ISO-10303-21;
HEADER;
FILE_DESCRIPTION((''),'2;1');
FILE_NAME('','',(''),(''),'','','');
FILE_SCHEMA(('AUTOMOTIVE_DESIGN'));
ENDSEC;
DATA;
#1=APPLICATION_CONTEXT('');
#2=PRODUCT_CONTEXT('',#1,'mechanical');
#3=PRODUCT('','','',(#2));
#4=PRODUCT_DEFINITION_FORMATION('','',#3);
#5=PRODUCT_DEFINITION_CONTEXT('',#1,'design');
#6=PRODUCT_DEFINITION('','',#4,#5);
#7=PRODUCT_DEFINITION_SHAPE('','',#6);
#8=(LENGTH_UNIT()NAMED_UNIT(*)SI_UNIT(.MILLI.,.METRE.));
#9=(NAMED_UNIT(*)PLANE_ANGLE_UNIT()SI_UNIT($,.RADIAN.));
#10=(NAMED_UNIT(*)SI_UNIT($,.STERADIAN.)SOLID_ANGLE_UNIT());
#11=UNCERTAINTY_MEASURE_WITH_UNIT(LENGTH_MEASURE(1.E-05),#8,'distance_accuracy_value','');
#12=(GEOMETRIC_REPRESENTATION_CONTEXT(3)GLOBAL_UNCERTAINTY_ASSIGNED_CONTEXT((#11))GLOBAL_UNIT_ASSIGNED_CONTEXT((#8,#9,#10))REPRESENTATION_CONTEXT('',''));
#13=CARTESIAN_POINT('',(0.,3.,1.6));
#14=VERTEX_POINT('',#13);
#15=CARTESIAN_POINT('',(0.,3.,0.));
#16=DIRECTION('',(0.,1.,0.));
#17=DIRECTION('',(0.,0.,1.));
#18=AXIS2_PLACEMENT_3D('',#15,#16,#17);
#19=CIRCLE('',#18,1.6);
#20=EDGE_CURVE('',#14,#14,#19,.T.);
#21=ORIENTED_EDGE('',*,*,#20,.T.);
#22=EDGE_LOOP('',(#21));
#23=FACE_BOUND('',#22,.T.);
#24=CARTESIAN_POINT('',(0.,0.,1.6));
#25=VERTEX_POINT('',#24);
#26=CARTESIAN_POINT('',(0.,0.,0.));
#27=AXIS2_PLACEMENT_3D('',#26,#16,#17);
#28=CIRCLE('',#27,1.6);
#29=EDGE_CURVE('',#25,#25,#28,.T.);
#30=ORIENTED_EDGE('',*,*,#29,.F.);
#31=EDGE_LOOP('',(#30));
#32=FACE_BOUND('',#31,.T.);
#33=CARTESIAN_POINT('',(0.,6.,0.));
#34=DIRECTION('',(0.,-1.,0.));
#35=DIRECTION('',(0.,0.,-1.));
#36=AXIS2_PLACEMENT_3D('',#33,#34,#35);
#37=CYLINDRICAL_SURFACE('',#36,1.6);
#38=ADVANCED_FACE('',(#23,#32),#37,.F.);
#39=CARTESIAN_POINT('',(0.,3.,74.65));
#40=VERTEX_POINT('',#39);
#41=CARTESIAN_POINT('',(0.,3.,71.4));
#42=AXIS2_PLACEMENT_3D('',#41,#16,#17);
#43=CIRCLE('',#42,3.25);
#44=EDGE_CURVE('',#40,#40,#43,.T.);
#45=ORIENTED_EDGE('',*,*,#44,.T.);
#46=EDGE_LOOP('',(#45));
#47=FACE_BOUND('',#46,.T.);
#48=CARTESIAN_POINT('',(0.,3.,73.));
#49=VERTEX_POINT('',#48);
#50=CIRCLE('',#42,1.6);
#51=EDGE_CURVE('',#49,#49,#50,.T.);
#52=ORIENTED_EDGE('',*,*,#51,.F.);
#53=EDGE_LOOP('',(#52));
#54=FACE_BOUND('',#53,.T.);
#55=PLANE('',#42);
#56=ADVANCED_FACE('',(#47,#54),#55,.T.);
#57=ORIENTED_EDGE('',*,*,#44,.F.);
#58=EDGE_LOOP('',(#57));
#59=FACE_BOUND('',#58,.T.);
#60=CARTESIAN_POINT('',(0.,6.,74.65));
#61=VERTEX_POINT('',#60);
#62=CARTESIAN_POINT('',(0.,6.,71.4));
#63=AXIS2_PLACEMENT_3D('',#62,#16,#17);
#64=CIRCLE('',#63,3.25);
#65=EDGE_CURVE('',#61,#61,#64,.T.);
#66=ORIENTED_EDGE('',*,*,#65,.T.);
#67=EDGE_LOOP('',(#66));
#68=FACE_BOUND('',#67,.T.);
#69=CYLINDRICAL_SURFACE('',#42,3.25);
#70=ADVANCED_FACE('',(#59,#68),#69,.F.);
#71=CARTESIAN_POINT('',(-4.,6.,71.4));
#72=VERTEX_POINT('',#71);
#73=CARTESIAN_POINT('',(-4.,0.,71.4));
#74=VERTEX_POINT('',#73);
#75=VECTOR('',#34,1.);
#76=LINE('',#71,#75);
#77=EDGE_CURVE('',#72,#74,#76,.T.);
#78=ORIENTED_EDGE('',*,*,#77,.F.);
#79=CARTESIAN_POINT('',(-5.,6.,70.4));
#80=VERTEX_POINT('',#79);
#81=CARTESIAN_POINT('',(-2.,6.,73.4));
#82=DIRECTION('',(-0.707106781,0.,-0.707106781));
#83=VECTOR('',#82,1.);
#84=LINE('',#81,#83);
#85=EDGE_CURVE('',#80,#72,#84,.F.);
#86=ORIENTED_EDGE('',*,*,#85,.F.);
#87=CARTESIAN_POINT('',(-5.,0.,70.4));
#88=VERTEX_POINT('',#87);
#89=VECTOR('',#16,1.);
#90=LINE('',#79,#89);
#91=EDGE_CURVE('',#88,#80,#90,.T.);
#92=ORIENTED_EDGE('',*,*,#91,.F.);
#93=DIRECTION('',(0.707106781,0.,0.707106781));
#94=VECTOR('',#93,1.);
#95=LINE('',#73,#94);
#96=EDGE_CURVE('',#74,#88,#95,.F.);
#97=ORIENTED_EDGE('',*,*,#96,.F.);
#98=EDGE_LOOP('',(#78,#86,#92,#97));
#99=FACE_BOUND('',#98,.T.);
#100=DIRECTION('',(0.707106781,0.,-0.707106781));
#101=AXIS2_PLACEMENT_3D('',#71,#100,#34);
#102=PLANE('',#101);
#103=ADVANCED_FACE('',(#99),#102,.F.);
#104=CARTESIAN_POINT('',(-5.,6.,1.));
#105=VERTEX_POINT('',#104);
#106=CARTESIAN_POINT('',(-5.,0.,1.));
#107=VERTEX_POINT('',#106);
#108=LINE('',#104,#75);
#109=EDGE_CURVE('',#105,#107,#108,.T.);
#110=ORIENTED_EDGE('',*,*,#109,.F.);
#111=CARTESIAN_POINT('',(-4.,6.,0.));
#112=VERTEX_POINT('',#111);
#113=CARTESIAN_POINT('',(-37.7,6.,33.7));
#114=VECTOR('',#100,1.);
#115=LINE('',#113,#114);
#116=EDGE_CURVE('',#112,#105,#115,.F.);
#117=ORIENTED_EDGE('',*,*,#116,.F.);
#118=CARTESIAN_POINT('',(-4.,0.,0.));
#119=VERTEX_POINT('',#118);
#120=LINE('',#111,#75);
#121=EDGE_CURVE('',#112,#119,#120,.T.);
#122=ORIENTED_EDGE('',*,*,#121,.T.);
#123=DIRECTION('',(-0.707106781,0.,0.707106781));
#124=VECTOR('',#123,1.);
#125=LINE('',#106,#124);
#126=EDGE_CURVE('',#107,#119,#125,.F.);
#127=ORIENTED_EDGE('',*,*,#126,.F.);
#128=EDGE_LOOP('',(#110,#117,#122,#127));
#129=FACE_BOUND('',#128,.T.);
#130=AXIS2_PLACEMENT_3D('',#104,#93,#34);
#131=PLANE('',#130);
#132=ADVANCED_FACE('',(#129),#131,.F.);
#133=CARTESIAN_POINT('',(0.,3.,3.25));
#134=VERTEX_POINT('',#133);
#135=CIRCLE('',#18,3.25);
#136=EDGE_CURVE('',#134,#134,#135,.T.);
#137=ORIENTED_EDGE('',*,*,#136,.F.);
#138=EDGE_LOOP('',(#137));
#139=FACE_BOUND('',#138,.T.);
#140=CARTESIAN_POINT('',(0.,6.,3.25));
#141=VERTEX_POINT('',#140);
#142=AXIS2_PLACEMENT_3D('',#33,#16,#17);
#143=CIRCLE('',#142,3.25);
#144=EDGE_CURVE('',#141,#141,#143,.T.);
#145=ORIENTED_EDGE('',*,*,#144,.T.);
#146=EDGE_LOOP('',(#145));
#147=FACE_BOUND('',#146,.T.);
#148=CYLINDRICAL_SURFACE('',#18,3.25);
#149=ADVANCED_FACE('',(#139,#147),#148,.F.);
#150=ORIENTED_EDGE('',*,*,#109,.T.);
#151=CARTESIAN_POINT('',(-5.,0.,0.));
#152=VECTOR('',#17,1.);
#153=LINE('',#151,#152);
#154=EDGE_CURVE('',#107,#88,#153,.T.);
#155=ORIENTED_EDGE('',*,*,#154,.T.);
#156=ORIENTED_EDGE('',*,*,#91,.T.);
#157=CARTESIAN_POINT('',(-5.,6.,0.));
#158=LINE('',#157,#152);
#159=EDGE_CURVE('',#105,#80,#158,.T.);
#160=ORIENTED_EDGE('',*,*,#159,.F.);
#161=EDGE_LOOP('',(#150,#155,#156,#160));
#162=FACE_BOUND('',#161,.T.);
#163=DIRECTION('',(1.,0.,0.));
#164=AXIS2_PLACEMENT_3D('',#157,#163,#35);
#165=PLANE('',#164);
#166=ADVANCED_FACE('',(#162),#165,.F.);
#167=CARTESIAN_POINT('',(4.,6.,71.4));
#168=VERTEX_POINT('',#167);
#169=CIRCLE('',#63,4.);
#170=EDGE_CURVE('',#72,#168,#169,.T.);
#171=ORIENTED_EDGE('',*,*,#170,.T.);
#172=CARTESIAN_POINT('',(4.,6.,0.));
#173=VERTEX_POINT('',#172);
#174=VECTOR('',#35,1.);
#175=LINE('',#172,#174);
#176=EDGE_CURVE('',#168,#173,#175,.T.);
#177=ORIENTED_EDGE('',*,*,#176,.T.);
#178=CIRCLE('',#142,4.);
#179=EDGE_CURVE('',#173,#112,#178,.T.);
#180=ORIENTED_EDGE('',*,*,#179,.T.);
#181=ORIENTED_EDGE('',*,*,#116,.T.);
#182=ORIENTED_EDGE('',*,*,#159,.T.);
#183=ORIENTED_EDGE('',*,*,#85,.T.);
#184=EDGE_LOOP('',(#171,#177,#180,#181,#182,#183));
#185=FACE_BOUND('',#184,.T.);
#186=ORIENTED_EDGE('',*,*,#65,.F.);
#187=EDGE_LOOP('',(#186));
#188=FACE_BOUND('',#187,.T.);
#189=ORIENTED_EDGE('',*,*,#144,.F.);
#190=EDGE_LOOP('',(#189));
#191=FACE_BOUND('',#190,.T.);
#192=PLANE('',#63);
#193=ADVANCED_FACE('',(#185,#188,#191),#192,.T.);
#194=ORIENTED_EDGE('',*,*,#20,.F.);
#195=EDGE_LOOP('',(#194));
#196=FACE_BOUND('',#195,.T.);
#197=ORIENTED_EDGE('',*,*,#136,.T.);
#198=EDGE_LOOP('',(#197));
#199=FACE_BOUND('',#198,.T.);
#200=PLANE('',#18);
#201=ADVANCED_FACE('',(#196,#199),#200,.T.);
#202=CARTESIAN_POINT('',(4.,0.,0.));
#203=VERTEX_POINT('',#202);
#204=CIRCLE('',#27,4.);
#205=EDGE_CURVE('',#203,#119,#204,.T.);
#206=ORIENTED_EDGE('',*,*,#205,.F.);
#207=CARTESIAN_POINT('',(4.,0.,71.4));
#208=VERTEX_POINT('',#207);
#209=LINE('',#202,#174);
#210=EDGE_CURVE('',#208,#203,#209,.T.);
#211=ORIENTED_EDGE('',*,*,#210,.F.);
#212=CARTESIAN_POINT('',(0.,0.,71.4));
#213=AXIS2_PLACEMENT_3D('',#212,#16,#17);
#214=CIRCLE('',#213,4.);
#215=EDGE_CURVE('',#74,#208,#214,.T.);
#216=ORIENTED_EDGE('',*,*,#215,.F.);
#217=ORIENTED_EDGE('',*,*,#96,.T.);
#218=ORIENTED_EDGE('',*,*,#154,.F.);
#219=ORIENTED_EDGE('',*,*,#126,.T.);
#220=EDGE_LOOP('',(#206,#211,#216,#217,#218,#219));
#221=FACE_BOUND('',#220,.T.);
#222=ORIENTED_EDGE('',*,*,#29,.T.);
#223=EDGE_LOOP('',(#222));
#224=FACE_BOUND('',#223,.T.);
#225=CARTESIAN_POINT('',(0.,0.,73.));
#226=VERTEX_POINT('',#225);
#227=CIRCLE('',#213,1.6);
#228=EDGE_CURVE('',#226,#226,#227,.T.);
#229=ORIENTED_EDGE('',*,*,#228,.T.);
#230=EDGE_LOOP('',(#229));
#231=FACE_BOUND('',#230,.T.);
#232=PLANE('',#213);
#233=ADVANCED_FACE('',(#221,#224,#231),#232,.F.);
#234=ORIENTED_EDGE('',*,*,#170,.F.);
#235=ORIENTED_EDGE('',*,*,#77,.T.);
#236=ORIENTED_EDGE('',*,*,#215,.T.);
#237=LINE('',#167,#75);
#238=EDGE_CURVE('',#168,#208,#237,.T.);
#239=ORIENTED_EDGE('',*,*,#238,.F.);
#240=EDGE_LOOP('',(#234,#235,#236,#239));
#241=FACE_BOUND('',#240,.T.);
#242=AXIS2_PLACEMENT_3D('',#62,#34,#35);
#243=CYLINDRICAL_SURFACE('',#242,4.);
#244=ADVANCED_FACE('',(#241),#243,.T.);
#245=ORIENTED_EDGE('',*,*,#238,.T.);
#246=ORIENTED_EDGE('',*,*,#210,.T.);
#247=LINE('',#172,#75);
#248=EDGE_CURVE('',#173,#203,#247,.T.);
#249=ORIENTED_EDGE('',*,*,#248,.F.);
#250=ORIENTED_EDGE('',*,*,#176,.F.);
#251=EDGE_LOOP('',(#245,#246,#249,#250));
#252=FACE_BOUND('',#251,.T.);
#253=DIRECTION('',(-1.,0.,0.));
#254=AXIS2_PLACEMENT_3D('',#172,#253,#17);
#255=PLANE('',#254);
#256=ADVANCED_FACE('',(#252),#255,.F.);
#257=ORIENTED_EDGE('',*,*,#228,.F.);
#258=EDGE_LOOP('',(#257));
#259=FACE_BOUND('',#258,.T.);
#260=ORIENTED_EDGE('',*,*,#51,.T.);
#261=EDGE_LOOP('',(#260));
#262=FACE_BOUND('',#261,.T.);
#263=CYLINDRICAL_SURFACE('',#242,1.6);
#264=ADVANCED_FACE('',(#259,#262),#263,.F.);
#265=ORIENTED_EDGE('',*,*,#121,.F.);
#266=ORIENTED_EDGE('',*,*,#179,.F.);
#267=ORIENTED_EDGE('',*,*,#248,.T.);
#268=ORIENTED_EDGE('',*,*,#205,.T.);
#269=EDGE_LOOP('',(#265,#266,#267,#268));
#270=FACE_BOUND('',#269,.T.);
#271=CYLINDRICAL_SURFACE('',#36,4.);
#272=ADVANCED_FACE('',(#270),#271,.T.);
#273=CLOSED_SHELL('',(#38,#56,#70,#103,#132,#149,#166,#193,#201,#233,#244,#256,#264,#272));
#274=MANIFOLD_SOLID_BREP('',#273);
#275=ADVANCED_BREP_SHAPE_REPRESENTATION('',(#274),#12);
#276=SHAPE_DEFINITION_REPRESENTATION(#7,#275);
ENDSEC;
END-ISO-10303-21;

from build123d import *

# Parameters (mm, degrees)
SKETCH_1_R          = 1.6
SKETCH_1_R_2        = 1.6000000000000016
EXTRUDE_1_DEPTH     = 6
CHAMFER_1_SIZE      = 1
SKETCH_2_R          = 3.25
SKETCH_2_R_2        = 3.250000000000001
CUT_EXTRUDE_1_DEPTH = 3


with BuildPart() as part:
    # Эскиз1 → Бобышка-Вытянуть1 (new body)
    with BuildSketch(Plane(origin=(0, 0, 0), x_dir=(1, 0, 0), z_dir=(0, 1, 0))):
        with BuildLine():
            Line((-4, -9.8e-16), (-5.000000000000001, -1.1e-15))
            Line((-5.000000000000001, -1.1e-15), (-4.999999999999991, -71.4))
            Line((-4.999999999999991, -71.4), (-4.000000000000001, -71.4))
            ThreePointArc((-4.000000000000001, -71.4), (-7.3e-16, -75.4), (4, -71.4))
            Line((4, -71.4), (4, 0))
            ThreePointArc((4, 0), (2.4e-16, 4), (-4, -9.8e-16))
        make_face()
        with Locations(Location((0, 0, 0), (0, 0, 270))):
            Circle(SKETCH_1_R, mode=Mode.SUBTRACT)
        with Locations(Location((0, -71.4, 0), (0, 0, 270))):
            Circle(SKETCH_1_R_2, mode=Mode.SUBTRACT)
    extrude(amount=EXTRUDE_1_DEPTH)

    # Фаска1
    chamfer_1_edges = [part.edges().sort_by_distance(p)[0] for p in [
        (-5.000000000000001, 3, 1.1e-15),
        (-4.999999999999991, 3, 71.4),
    ]]
    chamfer(chamfer_1_edges, length=CHAMFER_1_SIZE - 0.0001)  # a hair under: the kernel refuses the full size

    # Эскиз2 → Вырез-Вытянуть1 (cut)
    with BuildSketch(Plane(origin=(0, 6, 0), x_dir=(1, 0, 0), z_dir=(0, 1, 0))):
        with Locations(Location((0, 0, 0), (0, 0, 270))):
            Circle(SKETCH_2_R)
        with Locations(Location((0, -71.4, 0), (0, 0, 270))):
            Circle(SKETCH_2_R_2)
    extrude(amount=-CUT_EXTRUDE_1_DEPTH, mode=Mode.SUBTRACT)


solid = part.part
